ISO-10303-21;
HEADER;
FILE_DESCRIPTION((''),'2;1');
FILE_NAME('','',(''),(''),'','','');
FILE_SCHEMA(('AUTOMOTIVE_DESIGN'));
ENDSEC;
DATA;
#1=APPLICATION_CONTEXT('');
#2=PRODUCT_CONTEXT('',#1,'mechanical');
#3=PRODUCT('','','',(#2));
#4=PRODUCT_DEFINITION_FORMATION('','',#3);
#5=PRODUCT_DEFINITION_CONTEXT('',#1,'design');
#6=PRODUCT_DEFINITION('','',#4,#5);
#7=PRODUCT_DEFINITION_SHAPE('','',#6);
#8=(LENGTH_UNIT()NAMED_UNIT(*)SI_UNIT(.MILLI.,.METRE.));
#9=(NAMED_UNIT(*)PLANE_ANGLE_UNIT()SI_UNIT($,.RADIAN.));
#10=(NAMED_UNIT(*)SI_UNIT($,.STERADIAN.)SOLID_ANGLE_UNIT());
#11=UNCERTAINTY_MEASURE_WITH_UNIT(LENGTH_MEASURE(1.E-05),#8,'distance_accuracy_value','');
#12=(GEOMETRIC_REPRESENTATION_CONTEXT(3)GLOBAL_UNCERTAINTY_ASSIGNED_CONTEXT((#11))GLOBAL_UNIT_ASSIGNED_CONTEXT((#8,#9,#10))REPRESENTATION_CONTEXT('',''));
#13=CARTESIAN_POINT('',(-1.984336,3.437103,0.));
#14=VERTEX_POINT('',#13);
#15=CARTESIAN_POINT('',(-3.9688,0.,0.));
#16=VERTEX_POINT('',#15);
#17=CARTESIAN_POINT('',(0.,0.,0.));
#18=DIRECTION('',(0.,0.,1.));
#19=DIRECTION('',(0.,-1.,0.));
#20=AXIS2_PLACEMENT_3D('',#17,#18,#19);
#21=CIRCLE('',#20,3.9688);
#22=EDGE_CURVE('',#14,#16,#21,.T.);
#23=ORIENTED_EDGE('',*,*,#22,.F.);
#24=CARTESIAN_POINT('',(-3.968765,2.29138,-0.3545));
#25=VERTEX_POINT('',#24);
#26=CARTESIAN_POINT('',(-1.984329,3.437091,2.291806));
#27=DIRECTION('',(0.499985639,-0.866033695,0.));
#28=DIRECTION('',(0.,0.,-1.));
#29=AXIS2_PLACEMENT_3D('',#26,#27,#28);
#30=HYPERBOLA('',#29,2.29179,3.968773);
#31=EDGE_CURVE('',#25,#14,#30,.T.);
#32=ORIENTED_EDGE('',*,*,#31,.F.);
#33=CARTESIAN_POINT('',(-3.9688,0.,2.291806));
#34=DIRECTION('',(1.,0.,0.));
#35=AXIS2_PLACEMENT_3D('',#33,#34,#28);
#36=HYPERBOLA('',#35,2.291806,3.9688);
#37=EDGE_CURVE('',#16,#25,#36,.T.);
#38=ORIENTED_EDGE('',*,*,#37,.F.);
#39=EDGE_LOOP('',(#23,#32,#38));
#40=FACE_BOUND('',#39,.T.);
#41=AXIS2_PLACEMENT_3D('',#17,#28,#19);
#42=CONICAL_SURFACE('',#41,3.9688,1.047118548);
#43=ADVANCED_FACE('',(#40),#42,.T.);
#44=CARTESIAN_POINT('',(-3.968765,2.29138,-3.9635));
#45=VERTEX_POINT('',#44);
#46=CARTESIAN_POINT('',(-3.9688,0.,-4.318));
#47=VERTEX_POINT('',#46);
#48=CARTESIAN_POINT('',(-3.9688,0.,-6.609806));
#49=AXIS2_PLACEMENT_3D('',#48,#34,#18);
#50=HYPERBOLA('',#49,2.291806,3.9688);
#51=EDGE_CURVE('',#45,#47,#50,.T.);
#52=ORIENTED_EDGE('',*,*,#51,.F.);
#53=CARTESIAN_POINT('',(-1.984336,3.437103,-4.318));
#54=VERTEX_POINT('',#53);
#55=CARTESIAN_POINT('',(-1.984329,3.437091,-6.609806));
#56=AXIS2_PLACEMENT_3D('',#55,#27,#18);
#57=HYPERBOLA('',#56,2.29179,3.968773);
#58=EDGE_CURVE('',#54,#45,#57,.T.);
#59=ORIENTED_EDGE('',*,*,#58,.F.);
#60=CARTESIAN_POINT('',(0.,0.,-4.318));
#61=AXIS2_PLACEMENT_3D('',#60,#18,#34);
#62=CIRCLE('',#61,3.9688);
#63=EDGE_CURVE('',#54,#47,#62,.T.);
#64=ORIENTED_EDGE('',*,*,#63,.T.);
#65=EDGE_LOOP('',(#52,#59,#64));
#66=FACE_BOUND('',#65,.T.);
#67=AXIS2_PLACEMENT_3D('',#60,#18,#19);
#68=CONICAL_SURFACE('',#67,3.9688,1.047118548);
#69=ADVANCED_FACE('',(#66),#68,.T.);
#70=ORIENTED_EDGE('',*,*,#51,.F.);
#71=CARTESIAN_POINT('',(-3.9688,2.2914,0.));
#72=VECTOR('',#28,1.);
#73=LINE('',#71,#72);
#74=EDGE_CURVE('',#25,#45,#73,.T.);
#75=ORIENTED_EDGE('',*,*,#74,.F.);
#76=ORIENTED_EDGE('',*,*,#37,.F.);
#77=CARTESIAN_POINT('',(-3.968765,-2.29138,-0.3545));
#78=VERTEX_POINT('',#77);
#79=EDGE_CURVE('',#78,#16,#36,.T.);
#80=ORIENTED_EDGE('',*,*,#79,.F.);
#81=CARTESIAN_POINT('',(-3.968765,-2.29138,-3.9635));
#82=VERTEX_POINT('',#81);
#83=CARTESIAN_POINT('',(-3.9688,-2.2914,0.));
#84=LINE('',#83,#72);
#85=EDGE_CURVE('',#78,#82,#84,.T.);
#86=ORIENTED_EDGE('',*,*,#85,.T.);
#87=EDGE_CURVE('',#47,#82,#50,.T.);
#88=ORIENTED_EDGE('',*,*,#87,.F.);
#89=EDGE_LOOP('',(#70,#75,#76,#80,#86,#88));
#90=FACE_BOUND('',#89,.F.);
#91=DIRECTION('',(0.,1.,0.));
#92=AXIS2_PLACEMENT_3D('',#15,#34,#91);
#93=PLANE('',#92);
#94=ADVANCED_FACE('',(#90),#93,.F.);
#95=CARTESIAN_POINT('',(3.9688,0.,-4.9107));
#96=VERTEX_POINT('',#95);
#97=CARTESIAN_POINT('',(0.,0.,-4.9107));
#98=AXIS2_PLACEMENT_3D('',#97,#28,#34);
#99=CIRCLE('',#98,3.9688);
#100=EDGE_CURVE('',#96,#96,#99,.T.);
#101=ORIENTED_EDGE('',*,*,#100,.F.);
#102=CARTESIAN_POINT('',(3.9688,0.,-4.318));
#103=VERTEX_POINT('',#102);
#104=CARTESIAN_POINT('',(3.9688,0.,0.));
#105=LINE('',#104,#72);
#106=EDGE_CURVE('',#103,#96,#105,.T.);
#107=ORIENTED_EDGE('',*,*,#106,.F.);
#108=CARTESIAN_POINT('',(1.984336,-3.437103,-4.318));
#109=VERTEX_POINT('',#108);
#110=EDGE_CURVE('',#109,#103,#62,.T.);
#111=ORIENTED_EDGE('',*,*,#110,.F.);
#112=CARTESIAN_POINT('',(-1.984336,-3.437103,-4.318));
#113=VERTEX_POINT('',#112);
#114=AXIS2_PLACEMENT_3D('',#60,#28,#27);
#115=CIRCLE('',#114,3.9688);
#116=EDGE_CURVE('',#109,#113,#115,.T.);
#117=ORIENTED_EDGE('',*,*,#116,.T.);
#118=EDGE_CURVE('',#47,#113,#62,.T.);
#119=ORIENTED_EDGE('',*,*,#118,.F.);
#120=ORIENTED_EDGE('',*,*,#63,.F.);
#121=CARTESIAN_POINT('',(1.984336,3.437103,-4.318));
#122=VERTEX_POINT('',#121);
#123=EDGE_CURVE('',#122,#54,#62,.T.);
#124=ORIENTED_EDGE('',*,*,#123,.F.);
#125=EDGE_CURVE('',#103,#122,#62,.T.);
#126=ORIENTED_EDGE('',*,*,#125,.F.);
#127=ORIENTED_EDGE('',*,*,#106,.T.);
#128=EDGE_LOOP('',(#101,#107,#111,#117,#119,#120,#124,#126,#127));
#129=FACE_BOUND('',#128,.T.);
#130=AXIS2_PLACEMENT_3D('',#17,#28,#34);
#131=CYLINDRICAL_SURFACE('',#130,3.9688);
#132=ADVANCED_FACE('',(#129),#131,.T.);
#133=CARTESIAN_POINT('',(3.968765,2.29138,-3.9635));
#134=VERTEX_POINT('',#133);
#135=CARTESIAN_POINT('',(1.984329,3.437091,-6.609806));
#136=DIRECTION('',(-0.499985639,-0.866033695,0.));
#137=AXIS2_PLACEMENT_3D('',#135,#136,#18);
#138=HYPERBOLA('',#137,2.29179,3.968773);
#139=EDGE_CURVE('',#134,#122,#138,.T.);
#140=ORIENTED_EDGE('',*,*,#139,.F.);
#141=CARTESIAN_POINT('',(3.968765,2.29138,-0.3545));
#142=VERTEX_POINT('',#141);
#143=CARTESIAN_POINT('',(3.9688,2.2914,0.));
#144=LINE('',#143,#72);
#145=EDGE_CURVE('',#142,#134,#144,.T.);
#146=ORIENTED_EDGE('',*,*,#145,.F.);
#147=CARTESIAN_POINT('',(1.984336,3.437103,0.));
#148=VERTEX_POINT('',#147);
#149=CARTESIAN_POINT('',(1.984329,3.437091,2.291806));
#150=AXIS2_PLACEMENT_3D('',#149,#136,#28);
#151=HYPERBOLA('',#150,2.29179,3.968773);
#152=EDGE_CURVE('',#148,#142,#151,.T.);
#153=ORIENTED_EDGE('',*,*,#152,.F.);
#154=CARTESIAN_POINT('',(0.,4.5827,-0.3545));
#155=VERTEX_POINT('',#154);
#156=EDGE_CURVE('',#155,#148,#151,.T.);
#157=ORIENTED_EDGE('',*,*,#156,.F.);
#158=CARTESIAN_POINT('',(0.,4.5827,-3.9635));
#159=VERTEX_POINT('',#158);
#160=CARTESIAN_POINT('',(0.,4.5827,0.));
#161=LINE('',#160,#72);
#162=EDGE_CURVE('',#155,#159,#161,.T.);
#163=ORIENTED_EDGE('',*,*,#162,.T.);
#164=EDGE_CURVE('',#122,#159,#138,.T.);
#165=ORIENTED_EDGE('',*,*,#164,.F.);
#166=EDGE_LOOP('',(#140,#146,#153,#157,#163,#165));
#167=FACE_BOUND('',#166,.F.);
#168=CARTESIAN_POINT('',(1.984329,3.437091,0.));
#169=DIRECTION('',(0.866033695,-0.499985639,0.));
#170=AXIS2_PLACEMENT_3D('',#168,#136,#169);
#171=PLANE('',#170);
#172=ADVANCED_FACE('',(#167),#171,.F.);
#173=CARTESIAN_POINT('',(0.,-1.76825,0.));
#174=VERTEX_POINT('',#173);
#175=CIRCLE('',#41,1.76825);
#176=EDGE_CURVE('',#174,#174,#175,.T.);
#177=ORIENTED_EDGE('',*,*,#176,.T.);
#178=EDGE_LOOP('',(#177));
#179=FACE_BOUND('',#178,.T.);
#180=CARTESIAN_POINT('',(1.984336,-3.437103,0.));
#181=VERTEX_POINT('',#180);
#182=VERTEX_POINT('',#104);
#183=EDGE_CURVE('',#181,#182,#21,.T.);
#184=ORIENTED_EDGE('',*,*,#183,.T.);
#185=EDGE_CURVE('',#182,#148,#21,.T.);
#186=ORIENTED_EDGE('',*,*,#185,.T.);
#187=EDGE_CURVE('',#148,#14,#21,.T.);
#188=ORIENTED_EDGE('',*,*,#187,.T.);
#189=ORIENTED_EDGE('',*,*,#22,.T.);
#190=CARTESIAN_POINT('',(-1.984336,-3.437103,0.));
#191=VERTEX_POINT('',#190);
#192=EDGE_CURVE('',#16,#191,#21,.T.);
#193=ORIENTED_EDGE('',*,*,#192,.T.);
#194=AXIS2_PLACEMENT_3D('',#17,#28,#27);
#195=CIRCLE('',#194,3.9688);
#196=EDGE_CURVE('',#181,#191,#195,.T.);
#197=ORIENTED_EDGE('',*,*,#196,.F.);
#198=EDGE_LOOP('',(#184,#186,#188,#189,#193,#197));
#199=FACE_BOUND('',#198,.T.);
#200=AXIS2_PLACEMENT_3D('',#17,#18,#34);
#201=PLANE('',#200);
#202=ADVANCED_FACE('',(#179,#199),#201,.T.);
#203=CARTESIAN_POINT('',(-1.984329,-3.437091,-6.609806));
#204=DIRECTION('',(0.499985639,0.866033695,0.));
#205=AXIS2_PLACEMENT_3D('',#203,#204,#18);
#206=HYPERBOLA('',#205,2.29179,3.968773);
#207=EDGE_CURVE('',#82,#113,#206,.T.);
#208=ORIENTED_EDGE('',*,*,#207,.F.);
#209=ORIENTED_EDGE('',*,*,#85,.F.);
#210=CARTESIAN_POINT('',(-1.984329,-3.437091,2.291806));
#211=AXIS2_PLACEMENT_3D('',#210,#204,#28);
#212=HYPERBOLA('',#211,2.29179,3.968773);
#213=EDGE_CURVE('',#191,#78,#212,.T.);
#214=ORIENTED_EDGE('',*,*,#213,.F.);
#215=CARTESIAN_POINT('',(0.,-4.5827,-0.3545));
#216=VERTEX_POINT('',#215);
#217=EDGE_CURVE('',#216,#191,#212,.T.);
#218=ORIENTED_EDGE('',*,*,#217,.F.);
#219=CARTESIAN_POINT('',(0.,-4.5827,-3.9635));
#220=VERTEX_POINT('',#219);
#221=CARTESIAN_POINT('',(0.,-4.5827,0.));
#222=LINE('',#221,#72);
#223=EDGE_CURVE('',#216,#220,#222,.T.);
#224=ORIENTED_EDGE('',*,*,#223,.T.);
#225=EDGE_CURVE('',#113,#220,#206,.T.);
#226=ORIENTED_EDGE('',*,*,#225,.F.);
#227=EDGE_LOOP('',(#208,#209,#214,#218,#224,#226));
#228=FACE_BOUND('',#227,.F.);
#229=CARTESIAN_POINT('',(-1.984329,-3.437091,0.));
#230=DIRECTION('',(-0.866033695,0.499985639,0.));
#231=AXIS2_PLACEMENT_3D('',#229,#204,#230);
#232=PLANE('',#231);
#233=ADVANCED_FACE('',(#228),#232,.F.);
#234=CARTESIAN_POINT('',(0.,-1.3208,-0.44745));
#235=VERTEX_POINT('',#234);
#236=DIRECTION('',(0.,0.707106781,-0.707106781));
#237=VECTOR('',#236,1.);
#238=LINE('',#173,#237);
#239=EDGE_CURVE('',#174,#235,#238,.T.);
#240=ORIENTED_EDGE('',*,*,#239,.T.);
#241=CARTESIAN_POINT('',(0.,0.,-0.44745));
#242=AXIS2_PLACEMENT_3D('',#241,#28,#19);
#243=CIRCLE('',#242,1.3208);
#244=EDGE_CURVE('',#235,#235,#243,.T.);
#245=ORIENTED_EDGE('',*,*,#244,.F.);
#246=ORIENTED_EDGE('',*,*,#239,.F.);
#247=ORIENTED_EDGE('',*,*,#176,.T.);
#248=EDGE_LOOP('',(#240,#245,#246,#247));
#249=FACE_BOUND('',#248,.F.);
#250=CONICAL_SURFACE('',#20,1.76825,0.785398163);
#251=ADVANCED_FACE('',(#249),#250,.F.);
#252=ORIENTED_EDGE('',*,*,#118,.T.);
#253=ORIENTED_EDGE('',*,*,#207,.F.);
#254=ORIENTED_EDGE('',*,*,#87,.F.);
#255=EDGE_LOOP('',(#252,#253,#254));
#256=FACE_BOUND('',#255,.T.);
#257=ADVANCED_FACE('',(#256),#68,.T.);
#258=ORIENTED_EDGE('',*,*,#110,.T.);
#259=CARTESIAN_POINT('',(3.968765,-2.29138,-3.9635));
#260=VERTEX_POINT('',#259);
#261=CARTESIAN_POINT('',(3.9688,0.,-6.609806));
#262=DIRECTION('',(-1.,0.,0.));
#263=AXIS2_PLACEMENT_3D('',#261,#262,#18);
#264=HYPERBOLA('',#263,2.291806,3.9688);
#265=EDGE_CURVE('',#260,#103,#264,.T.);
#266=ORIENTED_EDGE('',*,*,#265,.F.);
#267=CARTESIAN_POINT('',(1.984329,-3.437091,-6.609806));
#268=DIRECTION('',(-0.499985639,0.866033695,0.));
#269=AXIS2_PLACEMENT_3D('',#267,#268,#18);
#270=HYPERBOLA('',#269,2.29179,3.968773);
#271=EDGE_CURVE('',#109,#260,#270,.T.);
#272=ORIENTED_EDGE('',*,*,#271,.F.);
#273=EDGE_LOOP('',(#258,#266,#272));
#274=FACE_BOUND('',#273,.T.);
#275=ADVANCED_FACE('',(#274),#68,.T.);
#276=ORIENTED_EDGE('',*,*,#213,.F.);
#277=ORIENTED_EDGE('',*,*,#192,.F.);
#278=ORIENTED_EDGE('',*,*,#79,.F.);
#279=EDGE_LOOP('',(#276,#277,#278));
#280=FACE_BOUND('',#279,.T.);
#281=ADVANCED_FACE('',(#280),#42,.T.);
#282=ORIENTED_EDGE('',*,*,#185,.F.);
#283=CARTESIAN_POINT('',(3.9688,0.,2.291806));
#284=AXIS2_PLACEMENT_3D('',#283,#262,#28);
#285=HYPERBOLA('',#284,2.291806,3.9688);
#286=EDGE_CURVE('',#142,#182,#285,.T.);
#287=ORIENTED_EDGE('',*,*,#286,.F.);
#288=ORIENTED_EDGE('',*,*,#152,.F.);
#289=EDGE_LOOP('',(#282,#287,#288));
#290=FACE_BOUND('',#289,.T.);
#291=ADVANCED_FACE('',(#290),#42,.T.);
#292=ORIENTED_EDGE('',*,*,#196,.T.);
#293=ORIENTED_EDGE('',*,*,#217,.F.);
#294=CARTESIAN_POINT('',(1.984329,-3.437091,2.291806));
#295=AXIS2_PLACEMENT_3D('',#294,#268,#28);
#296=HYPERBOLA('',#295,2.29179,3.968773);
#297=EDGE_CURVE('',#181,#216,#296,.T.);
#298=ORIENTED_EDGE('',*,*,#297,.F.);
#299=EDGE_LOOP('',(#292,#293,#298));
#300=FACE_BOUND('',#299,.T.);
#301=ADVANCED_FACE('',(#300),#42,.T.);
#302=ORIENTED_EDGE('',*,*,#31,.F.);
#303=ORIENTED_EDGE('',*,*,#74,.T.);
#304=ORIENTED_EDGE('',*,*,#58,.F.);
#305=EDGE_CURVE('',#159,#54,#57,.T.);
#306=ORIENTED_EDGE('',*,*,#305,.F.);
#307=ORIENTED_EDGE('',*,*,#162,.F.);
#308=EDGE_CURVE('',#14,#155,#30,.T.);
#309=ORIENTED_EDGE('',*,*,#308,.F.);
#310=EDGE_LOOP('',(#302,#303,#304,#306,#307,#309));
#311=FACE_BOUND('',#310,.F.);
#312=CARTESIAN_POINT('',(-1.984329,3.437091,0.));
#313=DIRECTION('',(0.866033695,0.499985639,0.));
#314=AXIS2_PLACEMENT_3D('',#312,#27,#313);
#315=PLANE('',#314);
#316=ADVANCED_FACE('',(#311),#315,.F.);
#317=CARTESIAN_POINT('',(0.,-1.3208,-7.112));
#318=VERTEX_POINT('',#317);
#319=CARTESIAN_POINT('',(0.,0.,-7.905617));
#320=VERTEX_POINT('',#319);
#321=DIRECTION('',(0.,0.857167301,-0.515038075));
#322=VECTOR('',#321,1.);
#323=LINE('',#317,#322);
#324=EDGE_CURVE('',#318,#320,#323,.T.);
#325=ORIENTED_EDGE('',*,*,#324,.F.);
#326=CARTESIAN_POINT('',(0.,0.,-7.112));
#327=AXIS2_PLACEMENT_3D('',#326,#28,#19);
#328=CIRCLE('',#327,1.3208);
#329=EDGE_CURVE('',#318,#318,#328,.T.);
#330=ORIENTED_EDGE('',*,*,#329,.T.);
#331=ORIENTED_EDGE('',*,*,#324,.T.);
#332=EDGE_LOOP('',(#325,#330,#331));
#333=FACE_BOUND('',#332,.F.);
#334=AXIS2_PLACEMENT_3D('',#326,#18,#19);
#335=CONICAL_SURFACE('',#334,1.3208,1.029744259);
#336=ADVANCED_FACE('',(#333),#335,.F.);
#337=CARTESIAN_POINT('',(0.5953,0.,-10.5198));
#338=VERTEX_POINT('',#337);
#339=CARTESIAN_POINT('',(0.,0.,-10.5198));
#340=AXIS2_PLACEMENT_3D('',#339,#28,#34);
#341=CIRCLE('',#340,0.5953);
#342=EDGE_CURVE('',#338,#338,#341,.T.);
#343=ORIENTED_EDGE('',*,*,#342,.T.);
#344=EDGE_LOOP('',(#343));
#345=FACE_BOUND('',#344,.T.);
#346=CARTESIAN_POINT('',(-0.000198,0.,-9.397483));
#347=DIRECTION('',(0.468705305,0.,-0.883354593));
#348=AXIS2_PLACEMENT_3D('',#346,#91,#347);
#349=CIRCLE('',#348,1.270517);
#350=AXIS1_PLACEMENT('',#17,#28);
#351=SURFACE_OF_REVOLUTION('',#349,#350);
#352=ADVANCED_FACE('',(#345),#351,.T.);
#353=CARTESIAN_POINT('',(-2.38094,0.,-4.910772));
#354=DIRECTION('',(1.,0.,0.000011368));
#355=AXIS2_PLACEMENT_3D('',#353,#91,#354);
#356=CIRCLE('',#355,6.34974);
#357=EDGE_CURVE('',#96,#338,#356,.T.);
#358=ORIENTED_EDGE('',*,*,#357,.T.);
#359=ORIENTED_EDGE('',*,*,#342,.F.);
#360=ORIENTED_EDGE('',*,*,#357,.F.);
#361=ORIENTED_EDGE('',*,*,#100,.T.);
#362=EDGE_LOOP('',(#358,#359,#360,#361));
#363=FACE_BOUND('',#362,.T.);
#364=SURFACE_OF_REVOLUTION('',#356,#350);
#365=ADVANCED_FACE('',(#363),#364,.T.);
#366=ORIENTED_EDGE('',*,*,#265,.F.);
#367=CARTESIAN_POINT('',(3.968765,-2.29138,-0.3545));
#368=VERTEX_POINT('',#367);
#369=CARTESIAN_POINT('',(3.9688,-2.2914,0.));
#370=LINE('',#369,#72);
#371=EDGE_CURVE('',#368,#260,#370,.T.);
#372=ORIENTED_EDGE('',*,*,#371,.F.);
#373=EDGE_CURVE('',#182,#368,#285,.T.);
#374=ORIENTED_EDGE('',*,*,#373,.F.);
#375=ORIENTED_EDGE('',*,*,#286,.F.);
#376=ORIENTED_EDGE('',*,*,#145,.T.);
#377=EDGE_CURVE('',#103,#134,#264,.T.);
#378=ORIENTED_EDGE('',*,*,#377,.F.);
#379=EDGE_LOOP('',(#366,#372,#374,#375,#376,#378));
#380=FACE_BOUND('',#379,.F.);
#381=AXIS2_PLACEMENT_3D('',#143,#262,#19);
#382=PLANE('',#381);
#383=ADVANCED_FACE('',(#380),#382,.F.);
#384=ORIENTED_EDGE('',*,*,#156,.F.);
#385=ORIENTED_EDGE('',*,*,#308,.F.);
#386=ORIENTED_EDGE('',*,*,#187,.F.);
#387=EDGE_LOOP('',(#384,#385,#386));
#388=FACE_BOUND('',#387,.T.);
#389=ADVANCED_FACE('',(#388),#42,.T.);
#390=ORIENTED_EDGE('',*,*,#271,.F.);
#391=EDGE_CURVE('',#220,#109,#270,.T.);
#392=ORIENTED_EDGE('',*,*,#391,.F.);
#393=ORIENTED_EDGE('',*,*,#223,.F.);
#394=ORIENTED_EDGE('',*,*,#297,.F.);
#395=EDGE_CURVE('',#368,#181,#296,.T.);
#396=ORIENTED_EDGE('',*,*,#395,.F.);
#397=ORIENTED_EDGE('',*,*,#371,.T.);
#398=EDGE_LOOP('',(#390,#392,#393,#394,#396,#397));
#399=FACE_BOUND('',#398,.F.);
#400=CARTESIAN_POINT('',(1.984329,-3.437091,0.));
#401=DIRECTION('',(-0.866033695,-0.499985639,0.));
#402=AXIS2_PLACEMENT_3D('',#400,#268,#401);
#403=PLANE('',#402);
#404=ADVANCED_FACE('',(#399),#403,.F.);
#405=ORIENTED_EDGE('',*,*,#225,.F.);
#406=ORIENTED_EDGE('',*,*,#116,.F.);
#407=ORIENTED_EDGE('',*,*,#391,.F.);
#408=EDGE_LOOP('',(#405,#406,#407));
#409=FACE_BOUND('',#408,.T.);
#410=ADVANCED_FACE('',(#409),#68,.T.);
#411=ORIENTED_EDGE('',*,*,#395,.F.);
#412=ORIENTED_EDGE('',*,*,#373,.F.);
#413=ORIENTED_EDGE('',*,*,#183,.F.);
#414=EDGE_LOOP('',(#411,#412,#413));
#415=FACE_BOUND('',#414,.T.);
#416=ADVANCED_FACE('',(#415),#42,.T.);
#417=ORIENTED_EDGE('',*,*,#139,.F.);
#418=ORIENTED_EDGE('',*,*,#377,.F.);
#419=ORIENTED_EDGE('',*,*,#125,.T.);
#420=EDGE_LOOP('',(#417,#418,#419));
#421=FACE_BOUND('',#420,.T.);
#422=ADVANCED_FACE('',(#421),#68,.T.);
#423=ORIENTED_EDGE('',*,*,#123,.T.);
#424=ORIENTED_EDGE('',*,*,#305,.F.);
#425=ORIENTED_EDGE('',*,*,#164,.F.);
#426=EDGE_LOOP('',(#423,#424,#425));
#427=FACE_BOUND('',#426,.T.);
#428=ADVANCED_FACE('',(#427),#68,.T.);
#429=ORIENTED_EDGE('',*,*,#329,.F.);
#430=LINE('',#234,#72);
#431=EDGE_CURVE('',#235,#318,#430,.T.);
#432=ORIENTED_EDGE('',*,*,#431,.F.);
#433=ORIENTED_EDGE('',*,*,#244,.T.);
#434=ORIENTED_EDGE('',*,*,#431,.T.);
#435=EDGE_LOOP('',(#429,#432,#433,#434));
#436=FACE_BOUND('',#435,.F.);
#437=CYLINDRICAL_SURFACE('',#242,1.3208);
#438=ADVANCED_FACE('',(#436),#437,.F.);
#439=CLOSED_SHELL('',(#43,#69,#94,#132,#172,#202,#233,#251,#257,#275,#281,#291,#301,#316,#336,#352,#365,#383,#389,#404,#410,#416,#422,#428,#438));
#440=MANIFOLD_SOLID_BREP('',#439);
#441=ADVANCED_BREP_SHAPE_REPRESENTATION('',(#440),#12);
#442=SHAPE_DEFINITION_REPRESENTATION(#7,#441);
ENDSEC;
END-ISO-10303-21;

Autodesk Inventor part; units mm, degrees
ref_plane "YZ Plane" through (0, 0, 0) normal (1, 0, 0) x (0, 1, 0)
sketch "Sketch2" plane through (0, 0, 0) normal (0, 1, 0) x (-1, 0, 0)
  line L0 (0, 0) -> (-3.9688, 0)
  line L1 (-3.9688, 0) -> (-3.9688, -4.9107)
  arc A0 (-3.9688, -4.9107) -> (-0.5953, -10.5198) centre (2.3812, -4.9107) ccw
  arc A1 (-0.5953, -10.5198) -> (0, -10.668) centre (0, -9.398) ccw
  line L2 (0, 0) -> (0, -10.668)
  line L3 (0, 0) -> (0, -10.668)
  dimension "d1" = 10.668
  dimension "d3" = 3.9688
  dimension "d5" = 0
  dimension "d7" = 1.27
  dimension "d9" = 6.35
revolve "Revolution1" add sketch "Sketch2" angle 360 about axis through (0, 0, 0) along (0, 0, -1)
sketch "Sketch7" plane through (0, 0, 0) normal (0, 0, 1) x (1, 0, 0)
  line L0 (-3.9688, -2.2914) -> (-3.9688, 2.2914)
  line L1 (-3.9688, 2.2914) -> (0, 4.5827)
  line L2 (0, 4.5827) -> (3.9688, 2.2914)
  line L3 (3.9688, 2.2914) -> (3.9688, -2.2914)
  line L4 (3.9688, -2.2914) -> (0, -4.5827)
  line L5 (0, -4.5827) -> (-3.9688, -2.2914)
  circle A0 centre (0, 0) radius 3.9688 projected
extrude "Extrusion1" add sketch "Sketch7" against normal blind 4.318 contours L0 A0 L5 | L0 L1 A0 | A0 L4 L5 | L1 L2 A0 | A0 L3 L4 | L2 L3 A0
sketch "Sketch9" plane through (0, 0, 0) normal (1, 0, 0) x (0, 1, 0)
  line L0 (-4.5827, -3.9635) -> (-4.5827, -4.318)
  line L1 (-4.5827, -4.318) -> (-3.9688, -4.318)
  line L2 (-3.9688, -4.318) -> (-4.5827, -3.9635)
  line L3 (0, -4.3889) -> (0, -3.8926) projected
  point P0 (-4.5827, -4.318)
  dimension "d53" = 7.9375
  dimension "d54" = 30
revolve "Revolution2" cut sketch "Sketch9" angle 360 about axis through (0, 0, -10) along (0, 0, 1)
sketch "Sketch11" plane through (-3.9688, -2.2914, 0) normal (0, 0, 1) x (1, 0, 0)
  line L0 (3.9687, -2.2914) -> (0, 0) projected
  line L1 (7.9375, 4.5827) -> (7.9375, 0) projected
  line L2 (3.9688, 6.8741) -> (3.9687, -2.2914) construction
  line L3 (0, 4.5827) -> (7.9375, 0) construction
  point P0 (3.9688, 2.2914)
hole "Hole1" at (0, 0, 0) direction (0, 0, -1) diameter 2.6416 depth 7.112 tip angle 118 countersink diameter 3.5365 countersink angle 90 thread size "6-32 UNC" class "2B" standard "ANSI Unified Screw Threads"
sketch "Sketch8" plane through (0, 0, 0) normal (1, 0, 0) x (0, 1, 0)
  line L0 (-4.5827, -0.3545) -> (-4.5827, 0)
  line L1 (-4.5827, 0) -> (-3.9688, 0)
  line L2 (-3.9688, 0) -> (-4.5827, -0.3545)
  line L3 (0, -0.4254) -> (0, 0.0709) projected
  point P0 (-4.5827, 0)
  dimension "d49" = 7.9375
  dimension "d50" = 30
revolve "Revolution3" cut sketch "Sketch8" angle 360 about axis through (0, 0, -10) along (0, 0, 1)
ref_plane "MSC_PF1" through (0, 0, 0) normal (1, 0, 0) x (0, 1, 0)
ref_plane "MSC_PT1" through (0, 0, 0) normal (0, 0, 1) x (1, 0, 0)
equation "\"d47\" = q"
equation "\"d76\" = PTC + NND"
equation "\"d79\" = tt"
equation "\"d1\" = ParH"
equation "\"d3\" = 0.5 * ParF"
equation "\"d7\" = r"
equation "\"d9\" = ParS"
equation "\"d49\" = ParF"
equation "\"d53\" = ParF"
equation "\"NND\" = 3.5052"
equation "\"ParF\" = 7.9375"
equation "\"g1\" = 9.1694"
equation "\"ParH\" = 10.668"
equation "\"q\" = 4.318"
equation "\"r\" = 1.27"
equation "\"ParS\" = 6.35"
equation "\"tt\" = 7.112"
equation "\"THREADDIA\" = NND"
equation "\"PTC\" = 0.03125"
properties part number "ANSI B 18.2.2 - #6-32, HC" material "Steel, Mild"
